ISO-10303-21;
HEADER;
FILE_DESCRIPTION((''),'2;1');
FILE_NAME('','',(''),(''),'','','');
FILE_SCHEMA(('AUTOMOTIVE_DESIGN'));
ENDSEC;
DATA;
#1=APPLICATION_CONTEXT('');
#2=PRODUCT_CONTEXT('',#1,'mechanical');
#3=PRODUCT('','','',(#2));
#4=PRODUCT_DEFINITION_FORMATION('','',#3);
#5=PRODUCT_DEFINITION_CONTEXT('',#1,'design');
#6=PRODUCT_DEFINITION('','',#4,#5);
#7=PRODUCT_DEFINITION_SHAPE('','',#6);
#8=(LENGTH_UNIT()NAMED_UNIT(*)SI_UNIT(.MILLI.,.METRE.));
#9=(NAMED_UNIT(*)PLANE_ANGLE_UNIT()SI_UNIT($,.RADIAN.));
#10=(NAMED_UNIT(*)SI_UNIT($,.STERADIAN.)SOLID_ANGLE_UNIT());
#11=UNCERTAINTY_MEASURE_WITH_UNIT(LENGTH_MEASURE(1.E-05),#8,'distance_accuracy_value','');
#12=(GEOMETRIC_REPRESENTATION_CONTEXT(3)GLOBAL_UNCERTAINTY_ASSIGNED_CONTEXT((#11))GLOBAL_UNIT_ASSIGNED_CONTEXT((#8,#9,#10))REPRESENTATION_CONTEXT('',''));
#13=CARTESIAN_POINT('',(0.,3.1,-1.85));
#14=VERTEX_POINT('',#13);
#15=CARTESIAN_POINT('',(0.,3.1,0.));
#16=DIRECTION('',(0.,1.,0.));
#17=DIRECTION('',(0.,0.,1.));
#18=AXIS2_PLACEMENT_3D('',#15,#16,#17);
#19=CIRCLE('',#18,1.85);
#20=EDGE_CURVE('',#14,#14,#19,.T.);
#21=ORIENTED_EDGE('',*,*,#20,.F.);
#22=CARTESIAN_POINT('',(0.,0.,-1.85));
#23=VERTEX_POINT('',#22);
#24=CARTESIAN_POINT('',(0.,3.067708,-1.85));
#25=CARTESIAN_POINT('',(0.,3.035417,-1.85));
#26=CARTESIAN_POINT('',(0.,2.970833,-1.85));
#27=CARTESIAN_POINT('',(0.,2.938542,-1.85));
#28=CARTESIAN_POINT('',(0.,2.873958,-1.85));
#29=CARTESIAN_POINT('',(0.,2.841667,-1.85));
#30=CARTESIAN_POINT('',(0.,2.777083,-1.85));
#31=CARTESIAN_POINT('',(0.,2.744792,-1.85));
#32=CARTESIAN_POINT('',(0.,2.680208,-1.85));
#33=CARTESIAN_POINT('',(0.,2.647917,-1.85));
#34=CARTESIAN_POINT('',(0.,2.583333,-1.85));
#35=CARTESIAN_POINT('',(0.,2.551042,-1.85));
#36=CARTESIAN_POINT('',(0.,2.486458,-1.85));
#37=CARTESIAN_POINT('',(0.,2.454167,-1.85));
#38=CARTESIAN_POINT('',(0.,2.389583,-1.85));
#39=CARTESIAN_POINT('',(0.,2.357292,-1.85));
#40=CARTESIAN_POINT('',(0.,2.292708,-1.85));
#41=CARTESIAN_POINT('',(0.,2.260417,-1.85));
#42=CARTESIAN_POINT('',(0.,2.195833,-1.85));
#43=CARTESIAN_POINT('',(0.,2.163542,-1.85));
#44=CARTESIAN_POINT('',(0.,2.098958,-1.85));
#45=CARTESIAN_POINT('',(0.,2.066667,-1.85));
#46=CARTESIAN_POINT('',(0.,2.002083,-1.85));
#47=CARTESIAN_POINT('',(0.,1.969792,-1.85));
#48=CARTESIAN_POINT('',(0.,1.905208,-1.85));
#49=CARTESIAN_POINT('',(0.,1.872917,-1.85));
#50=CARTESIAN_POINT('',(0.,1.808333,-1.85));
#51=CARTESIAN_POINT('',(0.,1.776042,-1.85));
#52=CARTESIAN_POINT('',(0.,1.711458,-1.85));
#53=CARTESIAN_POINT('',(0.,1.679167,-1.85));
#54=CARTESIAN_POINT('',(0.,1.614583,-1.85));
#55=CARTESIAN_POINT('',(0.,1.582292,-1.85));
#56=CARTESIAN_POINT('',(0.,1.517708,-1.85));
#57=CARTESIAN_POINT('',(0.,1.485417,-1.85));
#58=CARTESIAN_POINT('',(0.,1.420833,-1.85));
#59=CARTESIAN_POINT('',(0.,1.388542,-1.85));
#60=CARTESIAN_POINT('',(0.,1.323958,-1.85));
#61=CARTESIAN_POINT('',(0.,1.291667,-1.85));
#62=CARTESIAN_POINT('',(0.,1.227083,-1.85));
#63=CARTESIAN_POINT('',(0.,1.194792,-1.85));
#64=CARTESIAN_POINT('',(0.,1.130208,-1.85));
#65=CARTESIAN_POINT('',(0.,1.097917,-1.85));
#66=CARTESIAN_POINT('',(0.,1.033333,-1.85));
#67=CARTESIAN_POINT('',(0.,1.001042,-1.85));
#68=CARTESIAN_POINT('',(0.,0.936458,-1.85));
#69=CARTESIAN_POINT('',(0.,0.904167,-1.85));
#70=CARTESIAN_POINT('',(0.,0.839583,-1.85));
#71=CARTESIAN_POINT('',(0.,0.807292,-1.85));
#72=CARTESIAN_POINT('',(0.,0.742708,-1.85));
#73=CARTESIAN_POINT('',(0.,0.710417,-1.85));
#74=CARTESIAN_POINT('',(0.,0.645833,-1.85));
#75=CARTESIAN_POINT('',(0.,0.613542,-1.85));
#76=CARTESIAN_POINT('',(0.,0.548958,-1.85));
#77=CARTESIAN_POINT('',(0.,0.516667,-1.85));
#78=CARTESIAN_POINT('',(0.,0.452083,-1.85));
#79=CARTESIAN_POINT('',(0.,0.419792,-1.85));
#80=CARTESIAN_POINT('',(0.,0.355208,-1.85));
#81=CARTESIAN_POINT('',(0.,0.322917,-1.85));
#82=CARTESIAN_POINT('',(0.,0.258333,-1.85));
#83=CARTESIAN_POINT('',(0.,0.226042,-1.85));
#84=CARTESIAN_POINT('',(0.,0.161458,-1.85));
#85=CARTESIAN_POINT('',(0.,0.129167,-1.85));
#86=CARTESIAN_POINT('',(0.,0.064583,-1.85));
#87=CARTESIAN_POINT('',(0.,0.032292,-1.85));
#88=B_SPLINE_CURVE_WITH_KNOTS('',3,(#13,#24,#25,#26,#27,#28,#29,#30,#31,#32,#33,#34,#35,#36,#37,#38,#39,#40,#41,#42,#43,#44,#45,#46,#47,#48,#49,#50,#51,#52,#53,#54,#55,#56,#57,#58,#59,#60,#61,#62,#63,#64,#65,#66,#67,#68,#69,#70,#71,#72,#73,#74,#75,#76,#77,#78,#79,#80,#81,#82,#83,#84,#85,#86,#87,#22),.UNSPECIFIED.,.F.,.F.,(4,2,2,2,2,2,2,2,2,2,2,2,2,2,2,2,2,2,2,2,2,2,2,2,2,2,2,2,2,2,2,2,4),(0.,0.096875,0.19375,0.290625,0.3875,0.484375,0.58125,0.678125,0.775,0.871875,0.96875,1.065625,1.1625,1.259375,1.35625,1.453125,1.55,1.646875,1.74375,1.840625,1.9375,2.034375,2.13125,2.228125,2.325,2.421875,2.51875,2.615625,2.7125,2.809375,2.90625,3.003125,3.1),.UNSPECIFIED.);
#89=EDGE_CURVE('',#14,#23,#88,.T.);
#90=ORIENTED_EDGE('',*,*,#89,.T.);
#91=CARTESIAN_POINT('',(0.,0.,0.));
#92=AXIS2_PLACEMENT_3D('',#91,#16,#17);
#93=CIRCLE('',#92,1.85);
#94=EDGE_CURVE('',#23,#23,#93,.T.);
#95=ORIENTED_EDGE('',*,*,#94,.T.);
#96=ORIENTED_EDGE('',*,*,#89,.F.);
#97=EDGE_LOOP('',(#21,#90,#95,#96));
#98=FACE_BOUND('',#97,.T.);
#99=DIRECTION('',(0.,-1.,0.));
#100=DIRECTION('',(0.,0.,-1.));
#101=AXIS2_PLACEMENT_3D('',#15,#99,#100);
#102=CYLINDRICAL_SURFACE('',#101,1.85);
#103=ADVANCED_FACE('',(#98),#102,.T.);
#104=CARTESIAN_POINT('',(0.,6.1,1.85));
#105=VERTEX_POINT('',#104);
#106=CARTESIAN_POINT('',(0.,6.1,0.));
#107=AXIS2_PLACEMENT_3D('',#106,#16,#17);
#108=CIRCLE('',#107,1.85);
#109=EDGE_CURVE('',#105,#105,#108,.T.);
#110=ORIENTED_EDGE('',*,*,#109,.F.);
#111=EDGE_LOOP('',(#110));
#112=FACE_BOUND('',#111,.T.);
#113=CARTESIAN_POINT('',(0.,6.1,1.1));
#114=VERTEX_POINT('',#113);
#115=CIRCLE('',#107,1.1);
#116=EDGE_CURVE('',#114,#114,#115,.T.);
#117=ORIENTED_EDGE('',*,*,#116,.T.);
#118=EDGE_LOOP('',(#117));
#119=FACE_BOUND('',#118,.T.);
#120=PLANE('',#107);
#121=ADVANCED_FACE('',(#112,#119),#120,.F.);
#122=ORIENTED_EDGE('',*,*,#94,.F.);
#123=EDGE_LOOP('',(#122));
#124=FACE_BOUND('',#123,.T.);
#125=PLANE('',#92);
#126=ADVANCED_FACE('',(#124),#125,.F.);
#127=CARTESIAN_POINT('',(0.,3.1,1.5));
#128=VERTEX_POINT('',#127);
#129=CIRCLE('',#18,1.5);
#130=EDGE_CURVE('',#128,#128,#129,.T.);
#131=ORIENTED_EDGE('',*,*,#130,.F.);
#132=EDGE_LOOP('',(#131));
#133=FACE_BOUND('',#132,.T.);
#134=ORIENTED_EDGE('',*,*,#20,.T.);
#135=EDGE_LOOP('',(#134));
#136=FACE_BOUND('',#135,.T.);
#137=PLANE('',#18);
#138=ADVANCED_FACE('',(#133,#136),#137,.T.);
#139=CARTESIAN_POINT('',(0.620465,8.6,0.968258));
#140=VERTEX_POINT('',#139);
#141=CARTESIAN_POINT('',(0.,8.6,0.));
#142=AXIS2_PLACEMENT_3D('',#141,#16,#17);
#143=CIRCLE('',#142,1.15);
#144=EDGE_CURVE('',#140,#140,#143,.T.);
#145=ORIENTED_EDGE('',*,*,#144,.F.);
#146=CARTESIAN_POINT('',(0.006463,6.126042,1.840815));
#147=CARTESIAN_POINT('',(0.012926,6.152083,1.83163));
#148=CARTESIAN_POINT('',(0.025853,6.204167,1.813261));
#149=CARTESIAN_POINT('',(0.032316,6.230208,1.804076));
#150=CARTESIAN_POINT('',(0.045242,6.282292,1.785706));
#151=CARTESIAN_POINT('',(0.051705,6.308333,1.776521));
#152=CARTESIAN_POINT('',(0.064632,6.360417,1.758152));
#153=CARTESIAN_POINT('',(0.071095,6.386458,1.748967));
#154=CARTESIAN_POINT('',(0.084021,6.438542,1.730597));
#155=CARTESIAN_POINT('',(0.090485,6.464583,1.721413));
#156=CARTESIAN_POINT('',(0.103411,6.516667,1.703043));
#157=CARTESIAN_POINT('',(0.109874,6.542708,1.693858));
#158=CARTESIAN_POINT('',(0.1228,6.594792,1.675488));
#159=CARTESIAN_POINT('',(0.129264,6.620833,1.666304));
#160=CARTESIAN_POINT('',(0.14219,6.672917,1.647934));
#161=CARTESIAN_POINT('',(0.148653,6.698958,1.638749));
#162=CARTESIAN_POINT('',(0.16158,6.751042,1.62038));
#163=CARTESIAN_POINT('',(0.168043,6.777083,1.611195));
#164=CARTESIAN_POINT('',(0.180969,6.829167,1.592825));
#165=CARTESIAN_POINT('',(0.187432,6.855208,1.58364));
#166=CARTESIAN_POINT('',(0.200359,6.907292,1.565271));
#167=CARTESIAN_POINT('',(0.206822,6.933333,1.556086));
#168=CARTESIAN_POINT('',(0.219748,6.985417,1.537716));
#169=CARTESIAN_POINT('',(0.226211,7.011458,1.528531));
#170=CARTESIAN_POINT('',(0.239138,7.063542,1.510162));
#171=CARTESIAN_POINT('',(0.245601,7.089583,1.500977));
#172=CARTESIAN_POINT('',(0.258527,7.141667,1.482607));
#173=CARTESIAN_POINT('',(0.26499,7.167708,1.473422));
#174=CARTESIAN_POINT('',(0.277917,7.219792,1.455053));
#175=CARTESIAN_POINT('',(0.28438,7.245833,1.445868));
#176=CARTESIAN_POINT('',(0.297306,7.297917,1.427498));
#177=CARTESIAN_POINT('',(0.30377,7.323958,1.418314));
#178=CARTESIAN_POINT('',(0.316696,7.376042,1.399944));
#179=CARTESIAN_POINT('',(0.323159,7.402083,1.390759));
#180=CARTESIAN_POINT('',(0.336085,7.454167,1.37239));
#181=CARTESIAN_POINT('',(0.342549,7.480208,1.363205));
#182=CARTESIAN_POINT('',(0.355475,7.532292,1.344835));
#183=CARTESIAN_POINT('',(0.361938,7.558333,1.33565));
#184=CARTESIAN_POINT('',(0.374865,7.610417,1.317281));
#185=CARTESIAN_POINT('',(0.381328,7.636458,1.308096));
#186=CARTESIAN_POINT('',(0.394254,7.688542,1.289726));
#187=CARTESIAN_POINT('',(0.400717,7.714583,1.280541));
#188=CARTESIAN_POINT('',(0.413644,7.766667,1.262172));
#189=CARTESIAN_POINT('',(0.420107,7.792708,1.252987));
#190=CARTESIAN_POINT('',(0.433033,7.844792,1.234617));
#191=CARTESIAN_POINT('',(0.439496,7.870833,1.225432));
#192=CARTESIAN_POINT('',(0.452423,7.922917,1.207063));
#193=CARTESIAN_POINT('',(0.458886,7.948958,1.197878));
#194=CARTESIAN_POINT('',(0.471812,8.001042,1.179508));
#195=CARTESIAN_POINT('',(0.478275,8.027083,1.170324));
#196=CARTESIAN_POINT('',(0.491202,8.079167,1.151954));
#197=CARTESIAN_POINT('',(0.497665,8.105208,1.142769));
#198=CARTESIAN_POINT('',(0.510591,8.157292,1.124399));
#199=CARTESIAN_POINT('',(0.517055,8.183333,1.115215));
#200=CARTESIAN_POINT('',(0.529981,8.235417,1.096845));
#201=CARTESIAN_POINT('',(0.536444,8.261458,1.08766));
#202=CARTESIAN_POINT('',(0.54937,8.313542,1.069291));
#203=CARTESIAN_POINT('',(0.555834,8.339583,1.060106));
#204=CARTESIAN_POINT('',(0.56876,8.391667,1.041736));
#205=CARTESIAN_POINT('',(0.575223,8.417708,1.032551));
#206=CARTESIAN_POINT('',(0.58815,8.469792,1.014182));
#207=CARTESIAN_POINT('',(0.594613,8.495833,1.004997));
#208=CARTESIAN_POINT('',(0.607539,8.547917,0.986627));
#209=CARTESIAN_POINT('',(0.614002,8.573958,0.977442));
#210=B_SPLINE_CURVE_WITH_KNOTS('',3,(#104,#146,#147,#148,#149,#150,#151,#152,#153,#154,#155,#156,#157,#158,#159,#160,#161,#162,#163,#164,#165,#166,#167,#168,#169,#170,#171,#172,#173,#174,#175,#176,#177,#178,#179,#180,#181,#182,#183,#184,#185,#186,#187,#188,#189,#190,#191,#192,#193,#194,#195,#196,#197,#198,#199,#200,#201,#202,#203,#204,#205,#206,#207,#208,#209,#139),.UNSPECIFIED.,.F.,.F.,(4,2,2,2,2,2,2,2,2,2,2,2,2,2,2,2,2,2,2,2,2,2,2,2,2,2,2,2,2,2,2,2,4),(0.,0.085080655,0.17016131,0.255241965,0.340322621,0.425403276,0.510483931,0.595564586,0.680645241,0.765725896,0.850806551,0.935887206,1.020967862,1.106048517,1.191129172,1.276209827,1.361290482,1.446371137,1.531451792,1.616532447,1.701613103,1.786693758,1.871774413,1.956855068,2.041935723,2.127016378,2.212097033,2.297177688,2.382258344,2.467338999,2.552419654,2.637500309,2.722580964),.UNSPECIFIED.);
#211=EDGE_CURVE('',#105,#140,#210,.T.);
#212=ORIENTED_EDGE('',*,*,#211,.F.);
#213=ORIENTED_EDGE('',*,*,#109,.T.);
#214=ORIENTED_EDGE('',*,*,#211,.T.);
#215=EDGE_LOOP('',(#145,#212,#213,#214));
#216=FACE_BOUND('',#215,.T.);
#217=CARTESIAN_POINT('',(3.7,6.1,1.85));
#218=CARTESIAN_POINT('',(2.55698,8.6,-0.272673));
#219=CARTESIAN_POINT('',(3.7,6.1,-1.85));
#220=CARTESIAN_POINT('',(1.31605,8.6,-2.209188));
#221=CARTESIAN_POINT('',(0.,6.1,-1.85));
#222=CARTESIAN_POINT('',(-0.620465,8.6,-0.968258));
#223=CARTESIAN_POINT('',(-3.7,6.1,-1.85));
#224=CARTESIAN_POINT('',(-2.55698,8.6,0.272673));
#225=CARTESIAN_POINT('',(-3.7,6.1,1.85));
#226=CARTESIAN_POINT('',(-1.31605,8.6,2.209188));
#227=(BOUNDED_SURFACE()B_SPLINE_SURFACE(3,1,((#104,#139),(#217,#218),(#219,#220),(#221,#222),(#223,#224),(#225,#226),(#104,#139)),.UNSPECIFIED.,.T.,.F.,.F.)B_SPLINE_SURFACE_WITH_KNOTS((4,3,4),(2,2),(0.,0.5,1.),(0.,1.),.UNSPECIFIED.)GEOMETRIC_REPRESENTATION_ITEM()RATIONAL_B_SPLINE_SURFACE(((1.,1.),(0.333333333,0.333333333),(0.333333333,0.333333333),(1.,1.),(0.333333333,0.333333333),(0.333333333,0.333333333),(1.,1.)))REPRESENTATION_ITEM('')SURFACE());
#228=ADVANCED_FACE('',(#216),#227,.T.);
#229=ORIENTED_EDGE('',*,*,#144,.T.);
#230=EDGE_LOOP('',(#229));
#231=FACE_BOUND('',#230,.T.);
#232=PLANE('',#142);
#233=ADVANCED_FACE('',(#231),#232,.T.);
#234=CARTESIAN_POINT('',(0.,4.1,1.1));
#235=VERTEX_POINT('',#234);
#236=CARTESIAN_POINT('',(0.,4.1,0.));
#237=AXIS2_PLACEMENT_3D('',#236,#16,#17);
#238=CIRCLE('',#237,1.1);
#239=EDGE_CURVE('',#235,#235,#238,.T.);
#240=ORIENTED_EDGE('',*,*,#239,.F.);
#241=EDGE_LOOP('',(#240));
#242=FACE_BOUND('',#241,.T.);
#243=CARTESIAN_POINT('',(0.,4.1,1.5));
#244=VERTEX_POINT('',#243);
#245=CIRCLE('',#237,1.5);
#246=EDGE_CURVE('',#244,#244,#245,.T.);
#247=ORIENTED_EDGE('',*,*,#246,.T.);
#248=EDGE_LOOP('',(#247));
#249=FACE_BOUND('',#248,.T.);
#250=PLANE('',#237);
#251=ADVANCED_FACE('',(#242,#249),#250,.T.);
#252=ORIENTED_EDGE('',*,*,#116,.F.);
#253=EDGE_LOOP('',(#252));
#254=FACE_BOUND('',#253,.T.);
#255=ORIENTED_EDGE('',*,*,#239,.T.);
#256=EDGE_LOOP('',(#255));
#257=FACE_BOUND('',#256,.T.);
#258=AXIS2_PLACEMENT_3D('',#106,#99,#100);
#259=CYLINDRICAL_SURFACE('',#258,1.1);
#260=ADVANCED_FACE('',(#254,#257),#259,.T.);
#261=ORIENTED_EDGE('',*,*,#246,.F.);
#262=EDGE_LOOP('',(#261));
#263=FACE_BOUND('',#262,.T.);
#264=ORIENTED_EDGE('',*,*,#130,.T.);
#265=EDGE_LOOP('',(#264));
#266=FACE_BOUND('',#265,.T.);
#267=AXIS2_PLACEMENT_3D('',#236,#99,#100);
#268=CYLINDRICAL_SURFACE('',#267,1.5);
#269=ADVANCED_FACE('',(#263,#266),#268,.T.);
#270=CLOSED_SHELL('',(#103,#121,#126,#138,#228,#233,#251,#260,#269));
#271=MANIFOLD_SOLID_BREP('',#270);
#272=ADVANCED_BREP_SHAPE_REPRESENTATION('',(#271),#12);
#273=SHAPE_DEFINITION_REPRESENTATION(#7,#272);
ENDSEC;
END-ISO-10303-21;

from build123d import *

# Parameters (mm, degrees)
SKETCH1_R           = 1.85
BOSS_EXTRUDE1_DEPTH = 3.1
SKETCH2_R           = 1.5
BOSS_EXTRUDE2_DEPTH = 1
SKETCH3_R           = 1.1
BOSS_EXTRUDE3_DEPTH = 2


with BuildPart() as part:
    # Sketch1 → Boss-Extrude1 (new body)
    with BuildSketch(Plane(origin=(0, 0, 0), x_dir=(1, 0, 0), z_dir=(0, 1, 0))):
        with Locations(Location((0, 0, 0), (0, 0, 90))):
            Circle(SKETCH1_R)
    extrude(amount=BOSS_EXTRUDE1_DEPTH)

    # Sketch2 → Boss-Extrude2 (add)
    with BuildSketch(Plane(origin=(0, 3.1, 0), x_dir=(1, 0, 0), z_dir=(0, 1, 0))):
        with Locations(Location((0, 0, 0), (0, 0, 270))):
            Circle(SKETCH2_R)
    extrude(amount=BOSS_EXTRUDE2_DEPTH)

    # Sketch3 → Boss-Extrude3 (add)
    with BuildSketch(Plane(origin=(0, 4.1, 0), x_dir=(1, 0, 0), z_dir=(0, 1, 0))):
        with Locations(Location((0, 0, 0), (0, 0, 270))):
            Circle(SKETCH3_R)
    extrude(amount=BOSS_EXTRUDE3_DEPTH)

    # Loft1: read off the stored shape, not the designer's step
    # Loft1: loft between two sections, ruled curve by curve
    loft1_from = [
        Edge.make_bspline([(0, 6.1, 1.85), (3.7, 6.1, 1.85), (3.7, 6.1, -1.85), (0, 6.1, -1.85), (-3.7, 6.1, -1.85), (-3.7, 6.1, 1.85), (0, 6.1, 1.85)], [0, 0, 0, 0, 0.5, 0.5, 0.5, 1, 1, 1, 1], 3, [1, 0.333333333, 0.333333333, 1, 0.333333333, 0.333333333, 1]),
    ]
    loft1_to = [
        Edge.make_bspline([(0.620465421, 8.6, 0.968257539), (2.556980499, 8.6, -0.272673303), (1.316049657, 8.6, -2.209188381), (-0.620465421, 8.6, -0.968257539), (-2.556980499, 8.6, 0.272673303), (-1.316049657, 8.6, 2.209188381), (0.620465421, 8.6, 0.968257539)], [0, 0, 0, 0, 0.5, 0.5, 0.5, 1, 1, 1, 1], 3, [1, 0.333333333, 0.333333333, 1, 0.333333333, 0.333333333, 1]),
    ]
    loft1 = Solid(Shell([*[Face.make_surface_from_curves(loft1_from[k], loft1_to[k]) for k in range(1)], Face(Wire(loft1_from)), Face(Wire(loft1_to))]))
    add(loft1)


solid = part.part
